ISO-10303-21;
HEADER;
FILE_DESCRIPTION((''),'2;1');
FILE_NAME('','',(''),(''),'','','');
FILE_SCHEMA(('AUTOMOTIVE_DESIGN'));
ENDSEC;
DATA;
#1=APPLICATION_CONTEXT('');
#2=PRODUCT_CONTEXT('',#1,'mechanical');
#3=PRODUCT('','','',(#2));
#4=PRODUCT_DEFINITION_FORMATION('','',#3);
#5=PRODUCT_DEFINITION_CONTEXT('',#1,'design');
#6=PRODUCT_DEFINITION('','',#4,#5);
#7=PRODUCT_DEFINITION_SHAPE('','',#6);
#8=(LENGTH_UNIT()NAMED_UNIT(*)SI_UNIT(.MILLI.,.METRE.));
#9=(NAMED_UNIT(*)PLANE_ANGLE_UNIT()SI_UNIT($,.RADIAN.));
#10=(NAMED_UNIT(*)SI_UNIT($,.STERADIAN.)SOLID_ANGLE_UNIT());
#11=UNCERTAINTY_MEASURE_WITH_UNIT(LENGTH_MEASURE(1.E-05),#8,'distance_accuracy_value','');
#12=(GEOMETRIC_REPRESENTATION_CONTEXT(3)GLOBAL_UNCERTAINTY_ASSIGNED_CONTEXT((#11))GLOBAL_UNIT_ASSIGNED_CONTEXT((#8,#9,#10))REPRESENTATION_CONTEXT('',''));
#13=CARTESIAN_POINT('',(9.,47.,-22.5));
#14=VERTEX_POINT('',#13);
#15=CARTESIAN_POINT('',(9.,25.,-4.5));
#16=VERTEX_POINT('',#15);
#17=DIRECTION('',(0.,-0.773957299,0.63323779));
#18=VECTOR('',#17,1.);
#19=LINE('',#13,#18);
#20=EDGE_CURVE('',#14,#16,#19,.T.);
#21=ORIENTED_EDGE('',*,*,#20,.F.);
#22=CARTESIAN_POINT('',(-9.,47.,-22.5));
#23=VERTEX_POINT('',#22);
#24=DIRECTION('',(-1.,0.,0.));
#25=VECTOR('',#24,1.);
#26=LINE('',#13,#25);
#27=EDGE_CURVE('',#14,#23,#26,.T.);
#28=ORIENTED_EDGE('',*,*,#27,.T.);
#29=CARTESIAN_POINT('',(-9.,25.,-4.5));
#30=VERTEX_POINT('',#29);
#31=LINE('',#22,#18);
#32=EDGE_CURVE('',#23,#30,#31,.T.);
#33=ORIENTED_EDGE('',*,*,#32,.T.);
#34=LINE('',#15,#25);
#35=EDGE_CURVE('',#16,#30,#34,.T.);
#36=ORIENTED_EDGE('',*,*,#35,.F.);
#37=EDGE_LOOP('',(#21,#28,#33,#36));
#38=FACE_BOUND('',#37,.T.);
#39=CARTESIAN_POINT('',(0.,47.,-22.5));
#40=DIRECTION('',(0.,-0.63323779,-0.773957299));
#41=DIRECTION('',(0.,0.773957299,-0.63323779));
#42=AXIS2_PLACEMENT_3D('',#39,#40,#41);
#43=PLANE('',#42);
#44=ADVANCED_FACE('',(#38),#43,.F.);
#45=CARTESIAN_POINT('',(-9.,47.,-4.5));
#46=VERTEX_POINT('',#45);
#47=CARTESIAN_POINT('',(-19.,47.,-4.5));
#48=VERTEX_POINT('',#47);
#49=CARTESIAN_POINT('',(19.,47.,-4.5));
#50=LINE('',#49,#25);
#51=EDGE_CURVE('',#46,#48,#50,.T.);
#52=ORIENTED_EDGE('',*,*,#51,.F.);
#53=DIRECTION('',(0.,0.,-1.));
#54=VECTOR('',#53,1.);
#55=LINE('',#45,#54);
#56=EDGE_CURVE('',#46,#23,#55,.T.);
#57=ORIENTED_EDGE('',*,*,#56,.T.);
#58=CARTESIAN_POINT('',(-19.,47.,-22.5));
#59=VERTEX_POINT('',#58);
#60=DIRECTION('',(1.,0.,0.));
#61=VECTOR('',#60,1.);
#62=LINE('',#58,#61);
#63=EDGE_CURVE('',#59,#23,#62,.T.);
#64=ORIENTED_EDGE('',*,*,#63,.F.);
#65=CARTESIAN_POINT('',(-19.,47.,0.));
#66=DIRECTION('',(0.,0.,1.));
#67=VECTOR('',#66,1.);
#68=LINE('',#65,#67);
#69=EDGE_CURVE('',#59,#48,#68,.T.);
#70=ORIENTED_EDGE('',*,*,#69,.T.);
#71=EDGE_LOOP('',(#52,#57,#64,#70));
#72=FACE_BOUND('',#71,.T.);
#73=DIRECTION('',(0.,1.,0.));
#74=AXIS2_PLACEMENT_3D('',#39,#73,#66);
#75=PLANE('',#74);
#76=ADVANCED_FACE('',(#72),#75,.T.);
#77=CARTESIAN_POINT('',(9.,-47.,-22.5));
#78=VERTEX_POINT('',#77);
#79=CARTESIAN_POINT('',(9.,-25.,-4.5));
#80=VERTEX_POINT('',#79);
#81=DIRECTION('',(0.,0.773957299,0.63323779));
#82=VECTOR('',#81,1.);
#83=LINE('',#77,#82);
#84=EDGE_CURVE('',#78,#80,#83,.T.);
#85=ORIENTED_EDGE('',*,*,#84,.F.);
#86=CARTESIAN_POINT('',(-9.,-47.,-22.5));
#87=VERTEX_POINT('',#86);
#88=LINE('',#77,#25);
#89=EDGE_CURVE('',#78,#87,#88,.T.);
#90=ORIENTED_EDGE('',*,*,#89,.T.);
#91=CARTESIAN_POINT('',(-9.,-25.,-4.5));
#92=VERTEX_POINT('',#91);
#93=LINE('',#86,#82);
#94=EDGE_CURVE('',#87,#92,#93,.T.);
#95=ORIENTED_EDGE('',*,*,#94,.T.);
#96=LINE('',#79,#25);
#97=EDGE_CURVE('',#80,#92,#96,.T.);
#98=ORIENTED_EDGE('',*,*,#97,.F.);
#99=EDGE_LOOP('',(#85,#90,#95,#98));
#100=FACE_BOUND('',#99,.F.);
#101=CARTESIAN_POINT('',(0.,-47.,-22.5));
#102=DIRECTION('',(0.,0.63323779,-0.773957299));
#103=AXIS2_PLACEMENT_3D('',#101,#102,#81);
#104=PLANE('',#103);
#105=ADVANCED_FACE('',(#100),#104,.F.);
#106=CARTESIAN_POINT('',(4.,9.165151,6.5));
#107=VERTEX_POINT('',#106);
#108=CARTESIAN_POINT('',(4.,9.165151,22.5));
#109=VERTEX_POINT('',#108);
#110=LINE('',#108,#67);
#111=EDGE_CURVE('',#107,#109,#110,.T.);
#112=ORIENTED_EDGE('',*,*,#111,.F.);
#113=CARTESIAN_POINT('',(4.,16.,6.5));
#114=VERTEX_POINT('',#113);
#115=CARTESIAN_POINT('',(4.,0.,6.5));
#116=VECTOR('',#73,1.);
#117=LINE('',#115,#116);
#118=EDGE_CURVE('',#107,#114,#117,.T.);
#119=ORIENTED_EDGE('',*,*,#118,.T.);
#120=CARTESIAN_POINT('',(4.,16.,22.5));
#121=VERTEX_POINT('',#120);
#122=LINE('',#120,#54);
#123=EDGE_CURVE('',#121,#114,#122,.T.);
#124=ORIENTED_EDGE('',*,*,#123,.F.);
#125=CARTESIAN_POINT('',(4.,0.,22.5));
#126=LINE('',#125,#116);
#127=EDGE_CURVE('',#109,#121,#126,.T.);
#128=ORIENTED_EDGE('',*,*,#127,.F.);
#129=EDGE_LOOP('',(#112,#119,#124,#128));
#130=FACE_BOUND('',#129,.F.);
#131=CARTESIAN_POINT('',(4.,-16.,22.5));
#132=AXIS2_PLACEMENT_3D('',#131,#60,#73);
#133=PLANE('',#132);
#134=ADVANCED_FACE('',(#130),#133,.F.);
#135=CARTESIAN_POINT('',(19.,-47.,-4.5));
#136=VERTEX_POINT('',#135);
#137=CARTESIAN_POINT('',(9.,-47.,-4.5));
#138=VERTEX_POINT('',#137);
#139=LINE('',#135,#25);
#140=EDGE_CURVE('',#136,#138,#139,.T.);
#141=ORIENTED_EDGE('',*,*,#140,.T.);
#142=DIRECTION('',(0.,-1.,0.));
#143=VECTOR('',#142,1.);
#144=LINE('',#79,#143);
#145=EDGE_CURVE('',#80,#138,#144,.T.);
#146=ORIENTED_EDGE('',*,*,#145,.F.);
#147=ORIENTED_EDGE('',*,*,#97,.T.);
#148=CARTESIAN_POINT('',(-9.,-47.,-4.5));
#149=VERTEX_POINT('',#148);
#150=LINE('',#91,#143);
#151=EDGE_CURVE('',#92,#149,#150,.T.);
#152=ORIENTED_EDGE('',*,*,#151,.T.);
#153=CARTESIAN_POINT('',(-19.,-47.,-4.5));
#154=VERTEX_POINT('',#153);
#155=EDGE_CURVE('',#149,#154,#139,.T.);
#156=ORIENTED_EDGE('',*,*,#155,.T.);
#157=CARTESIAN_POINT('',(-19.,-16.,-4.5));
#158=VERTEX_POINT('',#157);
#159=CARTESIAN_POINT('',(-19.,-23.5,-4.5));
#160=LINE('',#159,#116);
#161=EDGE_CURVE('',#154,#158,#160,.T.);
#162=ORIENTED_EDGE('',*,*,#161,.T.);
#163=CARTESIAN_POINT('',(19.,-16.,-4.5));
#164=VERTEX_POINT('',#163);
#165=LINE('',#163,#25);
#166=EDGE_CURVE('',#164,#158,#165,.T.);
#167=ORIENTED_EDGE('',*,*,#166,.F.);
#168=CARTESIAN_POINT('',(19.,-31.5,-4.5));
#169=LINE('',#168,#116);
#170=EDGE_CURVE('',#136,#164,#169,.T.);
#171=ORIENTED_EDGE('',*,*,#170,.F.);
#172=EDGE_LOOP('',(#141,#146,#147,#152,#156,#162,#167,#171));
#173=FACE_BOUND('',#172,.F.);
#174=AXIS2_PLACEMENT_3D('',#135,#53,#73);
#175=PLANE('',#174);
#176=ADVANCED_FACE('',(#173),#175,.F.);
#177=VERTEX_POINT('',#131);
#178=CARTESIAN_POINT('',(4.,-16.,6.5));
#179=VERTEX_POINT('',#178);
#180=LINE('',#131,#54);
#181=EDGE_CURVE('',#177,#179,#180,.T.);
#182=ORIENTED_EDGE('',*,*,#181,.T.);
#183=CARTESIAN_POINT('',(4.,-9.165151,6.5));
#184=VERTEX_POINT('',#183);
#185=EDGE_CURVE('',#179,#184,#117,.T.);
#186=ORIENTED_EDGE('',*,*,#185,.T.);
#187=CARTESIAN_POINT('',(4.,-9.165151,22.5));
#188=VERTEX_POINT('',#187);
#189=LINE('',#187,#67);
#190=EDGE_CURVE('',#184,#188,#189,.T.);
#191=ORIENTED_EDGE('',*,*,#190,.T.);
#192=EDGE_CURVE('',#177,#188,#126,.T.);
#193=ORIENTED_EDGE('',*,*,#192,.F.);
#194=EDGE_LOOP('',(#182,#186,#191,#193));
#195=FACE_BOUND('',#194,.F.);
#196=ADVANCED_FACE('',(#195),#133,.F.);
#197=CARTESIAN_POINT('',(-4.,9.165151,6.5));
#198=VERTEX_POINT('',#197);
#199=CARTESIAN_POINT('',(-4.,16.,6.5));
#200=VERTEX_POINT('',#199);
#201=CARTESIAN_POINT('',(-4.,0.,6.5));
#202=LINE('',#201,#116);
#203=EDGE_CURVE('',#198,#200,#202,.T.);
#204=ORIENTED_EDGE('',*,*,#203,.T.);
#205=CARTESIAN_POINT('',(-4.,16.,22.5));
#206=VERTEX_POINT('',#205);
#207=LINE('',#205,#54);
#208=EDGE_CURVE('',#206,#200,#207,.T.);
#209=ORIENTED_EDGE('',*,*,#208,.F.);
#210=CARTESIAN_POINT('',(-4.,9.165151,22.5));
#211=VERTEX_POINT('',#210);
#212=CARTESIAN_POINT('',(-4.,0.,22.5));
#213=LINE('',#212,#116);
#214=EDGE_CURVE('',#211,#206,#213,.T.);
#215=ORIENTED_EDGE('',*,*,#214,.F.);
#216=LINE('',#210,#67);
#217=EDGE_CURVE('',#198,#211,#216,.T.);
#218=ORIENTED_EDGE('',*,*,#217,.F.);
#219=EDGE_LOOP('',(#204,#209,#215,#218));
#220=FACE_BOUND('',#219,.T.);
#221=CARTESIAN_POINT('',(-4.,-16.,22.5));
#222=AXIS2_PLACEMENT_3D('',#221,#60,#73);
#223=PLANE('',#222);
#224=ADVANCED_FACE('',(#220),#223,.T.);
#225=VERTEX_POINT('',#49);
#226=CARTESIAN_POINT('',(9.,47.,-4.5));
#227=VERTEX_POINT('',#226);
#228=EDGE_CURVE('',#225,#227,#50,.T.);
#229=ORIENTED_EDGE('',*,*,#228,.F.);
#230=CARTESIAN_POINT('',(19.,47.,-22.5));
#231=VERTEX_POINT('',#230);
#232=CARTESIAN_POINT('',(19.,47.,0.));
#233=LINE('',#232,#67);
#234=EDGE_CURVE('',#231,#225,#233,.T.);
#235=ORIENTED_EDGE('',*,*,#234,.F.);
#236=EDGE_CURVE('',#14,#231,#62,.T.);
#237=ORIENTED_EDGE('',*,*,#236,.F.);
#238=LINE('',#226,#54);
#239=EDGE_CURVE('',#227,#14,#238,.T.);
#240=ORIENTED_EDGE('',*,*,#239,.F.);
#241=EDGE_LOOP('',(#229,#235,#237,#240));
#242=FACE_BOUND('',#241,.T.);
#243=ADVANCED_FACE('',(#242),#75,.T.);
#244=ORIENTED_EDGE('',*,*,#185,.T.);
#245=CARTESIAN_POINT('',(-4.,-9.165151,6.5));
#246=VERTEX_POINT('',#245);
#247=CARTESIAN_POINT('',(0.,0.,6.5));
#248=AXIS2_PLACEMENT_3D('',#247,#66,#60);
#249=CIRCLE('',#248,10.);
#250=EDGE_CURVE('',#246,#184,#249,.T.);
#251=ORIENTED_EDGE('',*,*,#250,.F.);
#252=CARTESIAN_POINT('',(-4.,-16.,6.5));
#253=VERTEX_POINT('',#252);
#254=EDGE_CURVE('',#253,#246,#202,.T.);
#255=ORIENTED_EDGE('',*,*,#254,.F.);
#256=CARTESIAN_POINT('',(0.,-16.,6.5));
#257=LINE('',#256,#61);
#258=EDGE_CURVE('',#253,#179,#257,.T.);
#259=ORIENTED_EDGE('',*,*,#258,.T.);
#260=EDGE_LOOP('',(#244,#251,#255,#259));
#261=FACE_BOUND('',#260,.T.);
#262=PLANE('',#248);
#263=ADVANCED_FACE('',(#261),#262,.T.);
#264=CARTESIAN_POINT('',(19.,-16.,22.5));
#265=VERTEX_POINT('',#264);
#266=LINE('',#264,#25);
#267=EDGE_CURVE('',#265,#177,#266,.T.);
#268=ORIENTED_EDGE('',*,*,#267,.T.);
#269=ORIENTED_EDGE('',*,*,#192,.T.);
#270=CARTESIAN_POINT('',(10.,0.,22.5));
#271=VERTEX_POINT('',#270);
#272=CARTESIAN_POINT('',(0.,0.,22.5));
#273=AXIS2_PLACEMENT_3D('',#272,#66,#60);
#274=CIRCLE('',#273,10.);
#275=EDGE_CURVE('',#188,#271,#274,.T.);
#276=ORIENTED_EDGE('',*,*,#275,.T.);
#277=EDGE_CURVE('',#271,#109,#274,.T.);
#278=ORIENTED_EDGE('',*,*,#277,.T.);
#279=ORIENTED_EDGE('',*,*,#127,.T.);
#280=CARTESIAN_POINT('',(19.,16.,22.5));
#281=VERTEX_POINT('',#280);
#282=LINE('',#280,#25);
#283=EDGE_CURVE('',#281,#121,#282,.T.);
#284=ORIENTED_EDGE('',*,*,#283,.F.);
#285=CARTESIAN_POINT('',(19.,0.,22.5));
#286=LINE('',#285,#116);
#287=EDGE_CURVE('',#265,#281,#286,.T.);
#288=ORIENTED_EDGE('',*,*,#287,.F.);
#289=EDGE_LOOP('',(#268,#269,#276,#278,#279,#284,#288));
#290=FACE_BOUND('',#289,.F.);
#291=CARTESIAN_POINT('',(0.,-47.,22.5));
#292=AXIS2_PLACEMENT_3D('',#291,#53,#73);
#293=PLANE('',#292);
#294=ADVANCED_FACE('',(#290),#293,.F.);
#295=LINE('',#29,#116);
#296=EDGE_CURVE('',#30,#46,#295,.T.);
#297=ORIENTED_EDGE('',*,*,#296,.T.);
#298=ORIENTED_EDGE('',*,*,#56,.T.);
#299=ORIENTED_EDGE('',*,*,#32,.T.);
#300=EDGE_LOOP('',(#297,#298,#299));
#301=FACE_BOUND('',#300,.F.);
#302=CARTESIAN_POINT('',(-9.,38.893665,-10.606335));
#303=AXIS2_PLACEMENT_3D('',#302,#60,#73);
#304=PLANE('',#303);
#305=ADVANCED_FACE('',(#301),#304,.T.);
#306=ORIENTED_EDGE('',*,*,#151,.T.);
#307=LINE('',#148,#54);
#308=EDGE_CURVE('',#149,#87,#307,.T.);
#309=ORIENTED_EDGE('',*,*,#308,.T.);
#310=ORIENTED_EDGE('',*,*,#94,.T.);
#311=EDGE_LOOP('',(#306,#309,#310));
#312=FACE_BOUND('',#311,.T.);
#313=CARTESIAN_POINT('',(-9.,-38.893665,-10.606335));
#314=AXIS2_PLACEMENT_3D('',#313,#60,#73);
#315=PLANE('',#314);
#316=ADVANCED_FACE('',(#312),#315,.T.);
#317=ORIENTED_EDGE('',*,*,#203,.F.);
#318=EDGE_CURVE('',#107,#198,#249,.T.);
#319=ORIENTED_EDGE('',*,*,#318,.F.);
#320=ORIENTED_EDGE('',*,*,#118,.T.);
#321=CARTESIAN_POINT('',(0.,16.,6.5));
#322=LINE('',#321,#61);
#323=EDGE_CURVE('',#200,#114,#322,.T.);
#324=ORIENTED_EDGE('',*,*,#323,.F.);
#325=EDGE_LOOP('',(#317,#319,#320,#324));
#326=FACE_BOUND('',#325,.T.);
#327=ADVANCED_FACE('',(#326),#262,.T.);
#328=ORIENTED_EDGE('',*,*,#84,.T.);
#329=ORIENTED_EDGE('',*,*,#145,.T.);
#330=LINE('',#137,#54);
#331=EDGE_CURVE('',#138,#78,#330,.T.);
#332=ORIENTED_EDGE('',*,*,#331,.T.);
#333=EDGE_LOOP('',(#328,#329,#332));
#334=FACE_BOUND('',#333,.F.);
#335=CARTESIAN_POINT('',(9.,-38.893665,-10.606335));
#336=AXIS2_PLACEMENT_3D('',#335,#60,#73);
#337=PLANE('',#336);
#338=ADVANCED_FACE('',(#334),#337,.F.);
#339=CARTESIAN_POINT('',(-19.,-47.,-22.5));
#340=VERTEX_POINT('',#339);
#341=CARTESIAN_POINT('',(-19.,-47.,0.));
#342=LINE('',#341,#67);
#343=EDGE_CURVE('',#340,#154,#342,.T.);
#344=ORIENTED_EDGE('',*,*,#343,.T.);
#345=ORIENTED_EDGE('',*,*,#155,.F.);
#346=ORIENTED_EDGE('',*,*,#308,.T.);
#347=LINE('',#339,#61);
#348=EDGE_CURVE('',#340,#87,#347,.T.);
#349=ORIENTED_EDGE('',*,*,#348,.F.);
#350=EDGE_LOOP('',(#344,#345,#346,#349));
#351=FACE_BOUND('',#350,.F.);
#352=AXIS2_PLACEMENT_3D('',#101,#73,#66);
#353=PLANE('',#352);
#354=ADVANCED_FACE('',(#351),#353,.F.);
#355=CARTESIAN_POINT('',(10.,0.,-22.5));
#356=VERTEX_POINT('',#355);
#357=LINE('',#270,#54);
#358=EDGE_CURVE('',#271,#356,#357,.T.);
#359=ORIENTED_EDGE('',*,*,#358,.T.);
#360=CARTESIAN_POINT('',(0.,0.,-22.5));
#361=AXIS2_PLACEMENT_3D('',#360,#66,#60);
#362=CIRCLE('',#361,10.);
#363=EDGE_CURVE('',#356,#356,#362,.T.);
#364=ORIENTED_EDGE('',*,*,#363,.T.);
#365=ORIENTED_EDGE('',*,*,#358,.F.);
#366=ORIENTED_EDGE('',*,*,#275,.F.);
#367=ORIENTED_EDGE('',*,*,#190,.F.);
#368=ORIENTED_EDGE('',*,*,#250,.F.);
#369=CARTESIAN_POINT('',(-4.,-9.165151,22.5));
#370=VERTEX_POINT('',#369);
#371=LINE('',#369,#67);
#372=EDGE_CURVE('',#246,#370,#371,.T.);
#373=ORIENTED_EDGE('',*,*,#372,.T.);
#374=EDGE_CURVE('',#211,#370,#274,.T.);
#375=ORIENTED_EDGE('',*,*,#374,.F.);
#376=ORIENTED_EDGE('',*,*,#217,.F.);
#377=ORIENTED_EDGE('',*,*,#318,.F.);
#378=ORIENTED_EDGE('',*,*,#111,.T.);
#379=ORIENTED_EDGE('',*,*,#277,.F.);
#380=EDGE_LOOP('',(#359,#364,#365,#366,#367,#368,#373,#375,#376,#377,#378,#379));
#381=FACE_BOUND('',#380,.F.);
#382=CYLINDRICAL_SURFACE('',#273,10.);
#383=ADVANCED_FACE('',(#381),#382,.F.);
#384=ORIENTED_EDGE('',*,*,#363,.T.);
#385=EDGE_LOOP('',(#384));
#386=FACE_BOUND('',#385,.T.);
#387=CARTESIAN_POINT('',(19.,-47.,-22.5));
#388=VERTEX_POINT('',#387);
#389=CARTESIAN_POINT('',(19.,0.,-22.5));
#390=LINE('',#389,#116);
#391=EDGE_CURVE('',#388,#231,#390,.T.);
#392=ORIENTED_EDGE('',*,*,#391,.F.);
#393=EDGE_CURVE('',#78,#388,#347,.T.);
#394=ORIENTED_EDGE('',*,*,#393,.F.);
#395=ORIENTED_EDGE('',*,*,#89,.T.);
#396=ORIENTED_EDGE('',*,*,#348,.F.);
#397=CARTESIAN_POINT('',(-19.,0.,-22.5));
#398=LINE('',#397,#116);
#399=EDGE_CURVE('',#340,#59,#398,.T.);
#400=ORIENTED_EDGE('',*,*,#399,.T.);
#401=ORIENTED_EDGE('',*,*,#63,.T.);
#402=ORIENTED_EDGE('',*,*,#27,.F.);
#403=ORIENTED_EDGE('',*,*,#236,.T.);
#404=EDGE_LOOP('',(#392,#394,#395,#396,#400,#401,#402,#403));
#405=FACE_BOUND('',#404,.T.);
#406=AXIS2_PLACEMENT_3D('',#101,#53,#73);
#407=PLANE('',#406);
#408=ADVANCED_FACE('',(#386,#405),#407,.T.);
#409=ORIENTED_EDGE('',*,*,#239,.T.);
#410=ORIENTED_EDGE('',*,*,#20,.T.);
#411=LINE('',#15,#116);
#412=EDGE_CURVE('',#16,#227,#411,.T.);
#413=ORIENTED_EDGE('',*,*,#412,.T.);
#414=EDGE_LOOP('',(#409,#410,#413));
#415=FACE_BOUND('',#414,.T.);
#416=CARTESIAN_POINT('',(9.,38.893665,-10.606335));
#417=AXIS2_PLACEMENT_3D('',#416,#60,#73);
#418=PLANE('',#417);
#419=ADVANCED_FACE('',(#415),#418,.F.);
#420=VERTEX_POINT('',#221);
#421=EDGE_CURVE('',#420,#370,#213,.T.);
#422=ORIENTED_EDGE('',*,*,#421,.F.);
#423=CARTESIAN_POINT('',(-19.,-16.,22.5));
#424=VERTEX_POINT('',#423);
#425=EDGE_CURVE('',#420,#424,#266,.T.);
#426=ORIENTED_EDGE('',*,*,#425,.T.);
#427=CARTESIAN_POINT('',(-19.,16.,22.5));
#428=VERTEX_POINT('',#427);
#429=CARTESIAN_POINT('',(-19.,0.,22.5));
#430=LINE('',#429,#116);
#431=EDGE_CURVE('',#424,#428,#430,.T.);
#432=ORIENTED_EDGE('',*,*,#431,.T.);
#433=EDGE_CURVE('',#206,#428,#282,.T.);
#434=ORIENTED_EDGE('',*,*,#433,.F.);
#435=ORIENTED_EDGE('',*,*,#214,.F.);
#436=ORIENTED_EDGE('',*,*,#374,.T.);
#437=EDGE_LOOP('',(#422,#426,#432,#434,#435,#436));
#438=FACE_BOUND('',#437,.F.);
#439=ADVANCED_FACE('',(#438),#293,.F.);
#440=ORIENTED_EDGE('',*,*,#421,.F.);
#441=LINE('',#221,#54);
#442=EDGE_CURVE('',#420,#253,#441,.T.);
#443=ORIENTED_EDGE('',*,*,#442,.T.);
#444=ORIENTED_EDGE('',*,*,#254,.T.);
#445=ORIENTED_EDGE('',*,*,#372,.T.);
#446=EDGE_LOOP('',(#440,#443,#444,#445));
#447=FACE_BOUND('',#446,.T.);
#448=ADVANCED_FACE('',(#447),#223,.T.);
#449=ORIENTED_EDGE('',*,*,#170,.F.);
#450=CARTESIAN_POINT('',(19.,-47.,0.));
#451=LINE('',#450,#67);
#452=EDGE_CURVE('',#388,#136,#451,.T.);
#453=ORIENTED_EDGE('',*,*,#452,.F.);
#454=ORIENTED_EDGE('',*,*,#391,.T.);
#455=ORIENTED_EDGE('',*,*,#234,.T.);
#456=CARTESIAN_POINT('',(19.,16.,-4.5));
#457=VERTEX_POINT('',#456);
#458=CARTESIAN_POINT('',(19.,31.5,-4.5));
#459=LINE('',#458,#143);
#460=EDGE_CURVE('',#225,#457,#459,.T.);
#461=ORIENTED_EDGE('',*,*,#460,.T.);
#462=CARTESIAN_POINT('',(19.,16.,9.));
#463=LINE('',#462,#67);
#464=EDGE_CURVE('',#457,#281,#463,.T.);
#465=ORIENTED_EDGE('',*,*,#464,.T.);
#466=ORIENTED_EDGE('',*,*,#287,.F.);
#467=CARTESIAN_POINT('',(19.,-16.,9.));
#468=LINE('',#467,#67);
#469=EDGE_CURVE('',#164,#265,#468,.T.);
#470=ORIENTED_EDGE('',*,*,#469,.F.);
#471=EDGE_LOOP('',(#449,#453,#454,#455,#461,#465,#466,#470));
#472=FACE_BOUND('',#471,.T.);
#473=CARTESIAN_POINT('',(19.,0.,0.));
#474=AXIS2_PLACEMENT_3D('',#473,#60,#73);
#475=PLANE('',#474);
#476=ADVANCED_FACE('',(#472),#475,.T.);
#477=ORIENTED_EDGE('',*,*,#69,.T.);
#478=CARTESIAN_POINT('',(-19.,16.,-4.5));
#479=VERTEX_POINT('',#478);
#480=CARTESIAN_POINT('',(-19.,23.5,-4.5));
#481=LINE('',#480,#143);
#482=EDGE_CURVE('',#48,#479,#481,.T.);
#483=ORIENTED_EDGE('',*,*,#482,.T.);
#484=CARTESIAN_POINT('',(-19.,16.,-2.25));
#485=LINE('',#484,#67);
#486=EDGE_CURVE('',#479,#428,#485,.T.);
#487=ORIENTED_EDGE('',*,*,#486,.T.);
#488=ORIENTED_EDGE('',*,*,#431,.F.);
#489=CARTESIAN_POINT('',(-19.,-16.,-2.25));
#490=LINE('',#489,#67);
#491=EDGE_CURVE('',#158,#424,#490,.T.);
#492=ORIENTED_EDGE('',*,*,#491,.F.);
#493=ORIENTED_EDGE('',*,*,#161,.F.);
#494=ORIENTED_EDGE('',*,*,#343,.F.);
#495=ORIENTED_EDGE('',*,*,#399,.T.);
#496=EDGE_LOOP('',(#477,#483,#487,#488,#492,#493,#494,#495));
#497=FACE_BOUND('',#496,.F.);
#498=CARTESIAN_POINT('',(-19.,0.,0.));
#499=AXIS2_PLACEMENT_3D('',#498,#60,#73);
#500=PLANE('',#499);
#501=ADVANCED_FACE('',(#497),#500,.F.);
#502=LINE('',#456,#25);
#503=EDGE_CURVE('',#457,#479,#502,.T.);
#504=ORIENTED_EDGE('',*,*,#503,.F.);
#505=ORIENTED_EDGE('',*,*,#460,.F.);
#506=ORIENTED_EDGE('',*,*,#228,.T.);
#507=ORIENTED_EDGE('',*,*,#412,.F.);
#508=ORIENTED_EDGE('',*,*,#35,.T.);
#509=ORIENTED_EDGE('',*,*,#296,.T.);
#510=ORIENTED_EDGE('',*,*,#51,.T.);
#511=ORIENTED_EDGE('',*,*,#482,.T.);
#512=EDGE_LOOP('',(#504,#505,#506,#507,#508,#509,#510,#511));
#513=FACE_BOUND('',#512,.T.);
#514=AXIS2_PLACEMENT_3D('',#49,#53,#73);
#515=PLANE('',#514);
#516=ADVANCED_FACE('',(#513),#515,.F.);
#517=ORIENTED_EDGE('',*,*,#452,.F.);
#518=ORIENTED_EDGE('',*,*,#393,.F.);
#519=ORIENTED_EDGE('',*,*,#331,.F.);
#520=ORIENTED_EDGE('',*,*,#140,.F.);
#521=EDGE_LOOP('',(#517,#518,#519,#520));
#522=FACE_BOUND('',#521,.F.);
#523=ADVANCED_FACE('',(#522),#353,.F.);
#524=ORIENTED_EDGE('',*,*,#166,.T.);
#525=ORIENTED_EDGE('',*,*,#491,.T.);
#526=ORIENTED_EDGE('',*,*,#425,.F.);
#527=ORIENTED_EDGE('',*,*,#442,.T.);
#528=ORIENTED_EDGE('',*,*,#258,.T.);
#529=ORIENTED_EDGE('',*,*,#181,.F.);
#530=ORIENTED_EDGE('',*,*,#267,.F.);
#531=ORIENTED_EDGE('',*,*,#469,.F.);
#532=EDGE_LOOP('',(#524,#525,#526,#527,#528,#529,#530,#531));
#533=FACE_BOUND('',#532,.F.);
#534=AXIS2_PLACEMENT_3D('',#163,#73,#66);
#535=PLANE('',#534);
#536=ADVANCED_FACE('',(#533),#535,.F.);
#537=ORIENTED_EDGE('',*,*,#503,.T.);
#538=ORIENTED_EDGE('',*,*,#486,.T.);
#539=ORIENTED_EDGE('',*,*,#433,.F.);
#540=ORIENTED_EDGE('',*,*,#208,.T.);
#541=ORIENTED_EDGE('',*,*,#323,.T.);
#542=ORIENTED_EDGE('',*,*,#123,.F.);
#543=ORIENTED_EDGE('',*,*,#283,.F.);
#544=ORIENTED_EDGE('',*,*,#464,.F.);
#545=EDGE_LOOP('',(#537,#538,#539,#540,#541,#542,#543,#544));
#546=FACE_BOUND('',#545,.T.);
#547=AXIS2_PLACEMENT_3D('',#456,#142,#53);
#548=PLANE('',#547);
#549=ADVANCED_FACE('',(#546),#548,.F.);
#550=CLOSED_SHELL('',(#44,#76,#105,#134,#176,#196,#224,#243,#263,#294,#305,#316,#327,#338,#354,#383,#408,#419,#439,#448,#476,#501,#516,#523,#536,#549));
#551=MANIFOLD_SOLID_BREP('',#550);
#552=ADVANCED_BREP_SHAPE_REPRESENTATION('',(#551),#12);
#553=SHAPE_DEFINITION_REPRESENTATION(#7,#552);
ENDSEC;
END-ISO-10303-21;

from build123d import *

# Parameters (mm, degrees)
F0_W     = 94
F0_H     = 45
F1_DEPTH = 19
F2_W     = 31
F2_H     = 27
F3_DEPTH = 38.001
F4_R     = 10
F5_DEPTH = 45.001
F6_W     = 8
F6_H     = 32
F7_DEPTH = 16
F9_DEPTH = 9


# Not quite as in the source:
# - a pattern or mirror of a feature is missing from the dataset's text; its kind, count and spacing are read off the source's solid


with BuildPart() as f1:
    # F0 (on Right) → F1 (new body, symmetric)
    with BuildSketch(Plane.YZ):
        Rectangle(F0_W, F0_H)
    extrude(amount=F1_DEPTH, both=True)

    # F2 (on face) → F3 (cut, through all)
    with BuildSketch(Plane.YZ.offset(19)):
        with Locations((-31.5, 9)):
            Rectangle(F2_W, F2_H)
    f3 = extrude(amount=-F3_DEPTH, mode=Mode.SUBTRACT)

    # F3_copies: F3 across plane
    add(f3.mirror(Plane.ZX), mode=Mode.SUBTRACT)

    # F4 (on face) → F5 (cut, through all)
    with BuildSketch(Plane.XY.offset(22.5)):
        Circle(F4_R)
    extrude(amount=-F5_DEPTH, mode=Mode.SUBTRACT)

    # F6 (on face) → F7 (cut)
    with BuildSketch(Plane.XY.offset(22.5)):
        Rectangle(F6_W, F6_H)
    extrude(amount=-F7_DEPTH, mode=Mode.SUBTRACT)

    # F8 (on Right) → F9 (cut, symmetric)
    with BuildSketch(Plane.YZ):
        Polygon((-25, -4.5), (-47, -4.5), (-47, -22.5), align=None)
    f9 = extrude(amount=F9_DEPTH, both=True, mode=Mode.SUBTRACT)

    # F9_copies: F9 across plane
    add(f9.mirror(Plane.ZX), mode=Mode.SUBTRACT)


solid = f1.part
